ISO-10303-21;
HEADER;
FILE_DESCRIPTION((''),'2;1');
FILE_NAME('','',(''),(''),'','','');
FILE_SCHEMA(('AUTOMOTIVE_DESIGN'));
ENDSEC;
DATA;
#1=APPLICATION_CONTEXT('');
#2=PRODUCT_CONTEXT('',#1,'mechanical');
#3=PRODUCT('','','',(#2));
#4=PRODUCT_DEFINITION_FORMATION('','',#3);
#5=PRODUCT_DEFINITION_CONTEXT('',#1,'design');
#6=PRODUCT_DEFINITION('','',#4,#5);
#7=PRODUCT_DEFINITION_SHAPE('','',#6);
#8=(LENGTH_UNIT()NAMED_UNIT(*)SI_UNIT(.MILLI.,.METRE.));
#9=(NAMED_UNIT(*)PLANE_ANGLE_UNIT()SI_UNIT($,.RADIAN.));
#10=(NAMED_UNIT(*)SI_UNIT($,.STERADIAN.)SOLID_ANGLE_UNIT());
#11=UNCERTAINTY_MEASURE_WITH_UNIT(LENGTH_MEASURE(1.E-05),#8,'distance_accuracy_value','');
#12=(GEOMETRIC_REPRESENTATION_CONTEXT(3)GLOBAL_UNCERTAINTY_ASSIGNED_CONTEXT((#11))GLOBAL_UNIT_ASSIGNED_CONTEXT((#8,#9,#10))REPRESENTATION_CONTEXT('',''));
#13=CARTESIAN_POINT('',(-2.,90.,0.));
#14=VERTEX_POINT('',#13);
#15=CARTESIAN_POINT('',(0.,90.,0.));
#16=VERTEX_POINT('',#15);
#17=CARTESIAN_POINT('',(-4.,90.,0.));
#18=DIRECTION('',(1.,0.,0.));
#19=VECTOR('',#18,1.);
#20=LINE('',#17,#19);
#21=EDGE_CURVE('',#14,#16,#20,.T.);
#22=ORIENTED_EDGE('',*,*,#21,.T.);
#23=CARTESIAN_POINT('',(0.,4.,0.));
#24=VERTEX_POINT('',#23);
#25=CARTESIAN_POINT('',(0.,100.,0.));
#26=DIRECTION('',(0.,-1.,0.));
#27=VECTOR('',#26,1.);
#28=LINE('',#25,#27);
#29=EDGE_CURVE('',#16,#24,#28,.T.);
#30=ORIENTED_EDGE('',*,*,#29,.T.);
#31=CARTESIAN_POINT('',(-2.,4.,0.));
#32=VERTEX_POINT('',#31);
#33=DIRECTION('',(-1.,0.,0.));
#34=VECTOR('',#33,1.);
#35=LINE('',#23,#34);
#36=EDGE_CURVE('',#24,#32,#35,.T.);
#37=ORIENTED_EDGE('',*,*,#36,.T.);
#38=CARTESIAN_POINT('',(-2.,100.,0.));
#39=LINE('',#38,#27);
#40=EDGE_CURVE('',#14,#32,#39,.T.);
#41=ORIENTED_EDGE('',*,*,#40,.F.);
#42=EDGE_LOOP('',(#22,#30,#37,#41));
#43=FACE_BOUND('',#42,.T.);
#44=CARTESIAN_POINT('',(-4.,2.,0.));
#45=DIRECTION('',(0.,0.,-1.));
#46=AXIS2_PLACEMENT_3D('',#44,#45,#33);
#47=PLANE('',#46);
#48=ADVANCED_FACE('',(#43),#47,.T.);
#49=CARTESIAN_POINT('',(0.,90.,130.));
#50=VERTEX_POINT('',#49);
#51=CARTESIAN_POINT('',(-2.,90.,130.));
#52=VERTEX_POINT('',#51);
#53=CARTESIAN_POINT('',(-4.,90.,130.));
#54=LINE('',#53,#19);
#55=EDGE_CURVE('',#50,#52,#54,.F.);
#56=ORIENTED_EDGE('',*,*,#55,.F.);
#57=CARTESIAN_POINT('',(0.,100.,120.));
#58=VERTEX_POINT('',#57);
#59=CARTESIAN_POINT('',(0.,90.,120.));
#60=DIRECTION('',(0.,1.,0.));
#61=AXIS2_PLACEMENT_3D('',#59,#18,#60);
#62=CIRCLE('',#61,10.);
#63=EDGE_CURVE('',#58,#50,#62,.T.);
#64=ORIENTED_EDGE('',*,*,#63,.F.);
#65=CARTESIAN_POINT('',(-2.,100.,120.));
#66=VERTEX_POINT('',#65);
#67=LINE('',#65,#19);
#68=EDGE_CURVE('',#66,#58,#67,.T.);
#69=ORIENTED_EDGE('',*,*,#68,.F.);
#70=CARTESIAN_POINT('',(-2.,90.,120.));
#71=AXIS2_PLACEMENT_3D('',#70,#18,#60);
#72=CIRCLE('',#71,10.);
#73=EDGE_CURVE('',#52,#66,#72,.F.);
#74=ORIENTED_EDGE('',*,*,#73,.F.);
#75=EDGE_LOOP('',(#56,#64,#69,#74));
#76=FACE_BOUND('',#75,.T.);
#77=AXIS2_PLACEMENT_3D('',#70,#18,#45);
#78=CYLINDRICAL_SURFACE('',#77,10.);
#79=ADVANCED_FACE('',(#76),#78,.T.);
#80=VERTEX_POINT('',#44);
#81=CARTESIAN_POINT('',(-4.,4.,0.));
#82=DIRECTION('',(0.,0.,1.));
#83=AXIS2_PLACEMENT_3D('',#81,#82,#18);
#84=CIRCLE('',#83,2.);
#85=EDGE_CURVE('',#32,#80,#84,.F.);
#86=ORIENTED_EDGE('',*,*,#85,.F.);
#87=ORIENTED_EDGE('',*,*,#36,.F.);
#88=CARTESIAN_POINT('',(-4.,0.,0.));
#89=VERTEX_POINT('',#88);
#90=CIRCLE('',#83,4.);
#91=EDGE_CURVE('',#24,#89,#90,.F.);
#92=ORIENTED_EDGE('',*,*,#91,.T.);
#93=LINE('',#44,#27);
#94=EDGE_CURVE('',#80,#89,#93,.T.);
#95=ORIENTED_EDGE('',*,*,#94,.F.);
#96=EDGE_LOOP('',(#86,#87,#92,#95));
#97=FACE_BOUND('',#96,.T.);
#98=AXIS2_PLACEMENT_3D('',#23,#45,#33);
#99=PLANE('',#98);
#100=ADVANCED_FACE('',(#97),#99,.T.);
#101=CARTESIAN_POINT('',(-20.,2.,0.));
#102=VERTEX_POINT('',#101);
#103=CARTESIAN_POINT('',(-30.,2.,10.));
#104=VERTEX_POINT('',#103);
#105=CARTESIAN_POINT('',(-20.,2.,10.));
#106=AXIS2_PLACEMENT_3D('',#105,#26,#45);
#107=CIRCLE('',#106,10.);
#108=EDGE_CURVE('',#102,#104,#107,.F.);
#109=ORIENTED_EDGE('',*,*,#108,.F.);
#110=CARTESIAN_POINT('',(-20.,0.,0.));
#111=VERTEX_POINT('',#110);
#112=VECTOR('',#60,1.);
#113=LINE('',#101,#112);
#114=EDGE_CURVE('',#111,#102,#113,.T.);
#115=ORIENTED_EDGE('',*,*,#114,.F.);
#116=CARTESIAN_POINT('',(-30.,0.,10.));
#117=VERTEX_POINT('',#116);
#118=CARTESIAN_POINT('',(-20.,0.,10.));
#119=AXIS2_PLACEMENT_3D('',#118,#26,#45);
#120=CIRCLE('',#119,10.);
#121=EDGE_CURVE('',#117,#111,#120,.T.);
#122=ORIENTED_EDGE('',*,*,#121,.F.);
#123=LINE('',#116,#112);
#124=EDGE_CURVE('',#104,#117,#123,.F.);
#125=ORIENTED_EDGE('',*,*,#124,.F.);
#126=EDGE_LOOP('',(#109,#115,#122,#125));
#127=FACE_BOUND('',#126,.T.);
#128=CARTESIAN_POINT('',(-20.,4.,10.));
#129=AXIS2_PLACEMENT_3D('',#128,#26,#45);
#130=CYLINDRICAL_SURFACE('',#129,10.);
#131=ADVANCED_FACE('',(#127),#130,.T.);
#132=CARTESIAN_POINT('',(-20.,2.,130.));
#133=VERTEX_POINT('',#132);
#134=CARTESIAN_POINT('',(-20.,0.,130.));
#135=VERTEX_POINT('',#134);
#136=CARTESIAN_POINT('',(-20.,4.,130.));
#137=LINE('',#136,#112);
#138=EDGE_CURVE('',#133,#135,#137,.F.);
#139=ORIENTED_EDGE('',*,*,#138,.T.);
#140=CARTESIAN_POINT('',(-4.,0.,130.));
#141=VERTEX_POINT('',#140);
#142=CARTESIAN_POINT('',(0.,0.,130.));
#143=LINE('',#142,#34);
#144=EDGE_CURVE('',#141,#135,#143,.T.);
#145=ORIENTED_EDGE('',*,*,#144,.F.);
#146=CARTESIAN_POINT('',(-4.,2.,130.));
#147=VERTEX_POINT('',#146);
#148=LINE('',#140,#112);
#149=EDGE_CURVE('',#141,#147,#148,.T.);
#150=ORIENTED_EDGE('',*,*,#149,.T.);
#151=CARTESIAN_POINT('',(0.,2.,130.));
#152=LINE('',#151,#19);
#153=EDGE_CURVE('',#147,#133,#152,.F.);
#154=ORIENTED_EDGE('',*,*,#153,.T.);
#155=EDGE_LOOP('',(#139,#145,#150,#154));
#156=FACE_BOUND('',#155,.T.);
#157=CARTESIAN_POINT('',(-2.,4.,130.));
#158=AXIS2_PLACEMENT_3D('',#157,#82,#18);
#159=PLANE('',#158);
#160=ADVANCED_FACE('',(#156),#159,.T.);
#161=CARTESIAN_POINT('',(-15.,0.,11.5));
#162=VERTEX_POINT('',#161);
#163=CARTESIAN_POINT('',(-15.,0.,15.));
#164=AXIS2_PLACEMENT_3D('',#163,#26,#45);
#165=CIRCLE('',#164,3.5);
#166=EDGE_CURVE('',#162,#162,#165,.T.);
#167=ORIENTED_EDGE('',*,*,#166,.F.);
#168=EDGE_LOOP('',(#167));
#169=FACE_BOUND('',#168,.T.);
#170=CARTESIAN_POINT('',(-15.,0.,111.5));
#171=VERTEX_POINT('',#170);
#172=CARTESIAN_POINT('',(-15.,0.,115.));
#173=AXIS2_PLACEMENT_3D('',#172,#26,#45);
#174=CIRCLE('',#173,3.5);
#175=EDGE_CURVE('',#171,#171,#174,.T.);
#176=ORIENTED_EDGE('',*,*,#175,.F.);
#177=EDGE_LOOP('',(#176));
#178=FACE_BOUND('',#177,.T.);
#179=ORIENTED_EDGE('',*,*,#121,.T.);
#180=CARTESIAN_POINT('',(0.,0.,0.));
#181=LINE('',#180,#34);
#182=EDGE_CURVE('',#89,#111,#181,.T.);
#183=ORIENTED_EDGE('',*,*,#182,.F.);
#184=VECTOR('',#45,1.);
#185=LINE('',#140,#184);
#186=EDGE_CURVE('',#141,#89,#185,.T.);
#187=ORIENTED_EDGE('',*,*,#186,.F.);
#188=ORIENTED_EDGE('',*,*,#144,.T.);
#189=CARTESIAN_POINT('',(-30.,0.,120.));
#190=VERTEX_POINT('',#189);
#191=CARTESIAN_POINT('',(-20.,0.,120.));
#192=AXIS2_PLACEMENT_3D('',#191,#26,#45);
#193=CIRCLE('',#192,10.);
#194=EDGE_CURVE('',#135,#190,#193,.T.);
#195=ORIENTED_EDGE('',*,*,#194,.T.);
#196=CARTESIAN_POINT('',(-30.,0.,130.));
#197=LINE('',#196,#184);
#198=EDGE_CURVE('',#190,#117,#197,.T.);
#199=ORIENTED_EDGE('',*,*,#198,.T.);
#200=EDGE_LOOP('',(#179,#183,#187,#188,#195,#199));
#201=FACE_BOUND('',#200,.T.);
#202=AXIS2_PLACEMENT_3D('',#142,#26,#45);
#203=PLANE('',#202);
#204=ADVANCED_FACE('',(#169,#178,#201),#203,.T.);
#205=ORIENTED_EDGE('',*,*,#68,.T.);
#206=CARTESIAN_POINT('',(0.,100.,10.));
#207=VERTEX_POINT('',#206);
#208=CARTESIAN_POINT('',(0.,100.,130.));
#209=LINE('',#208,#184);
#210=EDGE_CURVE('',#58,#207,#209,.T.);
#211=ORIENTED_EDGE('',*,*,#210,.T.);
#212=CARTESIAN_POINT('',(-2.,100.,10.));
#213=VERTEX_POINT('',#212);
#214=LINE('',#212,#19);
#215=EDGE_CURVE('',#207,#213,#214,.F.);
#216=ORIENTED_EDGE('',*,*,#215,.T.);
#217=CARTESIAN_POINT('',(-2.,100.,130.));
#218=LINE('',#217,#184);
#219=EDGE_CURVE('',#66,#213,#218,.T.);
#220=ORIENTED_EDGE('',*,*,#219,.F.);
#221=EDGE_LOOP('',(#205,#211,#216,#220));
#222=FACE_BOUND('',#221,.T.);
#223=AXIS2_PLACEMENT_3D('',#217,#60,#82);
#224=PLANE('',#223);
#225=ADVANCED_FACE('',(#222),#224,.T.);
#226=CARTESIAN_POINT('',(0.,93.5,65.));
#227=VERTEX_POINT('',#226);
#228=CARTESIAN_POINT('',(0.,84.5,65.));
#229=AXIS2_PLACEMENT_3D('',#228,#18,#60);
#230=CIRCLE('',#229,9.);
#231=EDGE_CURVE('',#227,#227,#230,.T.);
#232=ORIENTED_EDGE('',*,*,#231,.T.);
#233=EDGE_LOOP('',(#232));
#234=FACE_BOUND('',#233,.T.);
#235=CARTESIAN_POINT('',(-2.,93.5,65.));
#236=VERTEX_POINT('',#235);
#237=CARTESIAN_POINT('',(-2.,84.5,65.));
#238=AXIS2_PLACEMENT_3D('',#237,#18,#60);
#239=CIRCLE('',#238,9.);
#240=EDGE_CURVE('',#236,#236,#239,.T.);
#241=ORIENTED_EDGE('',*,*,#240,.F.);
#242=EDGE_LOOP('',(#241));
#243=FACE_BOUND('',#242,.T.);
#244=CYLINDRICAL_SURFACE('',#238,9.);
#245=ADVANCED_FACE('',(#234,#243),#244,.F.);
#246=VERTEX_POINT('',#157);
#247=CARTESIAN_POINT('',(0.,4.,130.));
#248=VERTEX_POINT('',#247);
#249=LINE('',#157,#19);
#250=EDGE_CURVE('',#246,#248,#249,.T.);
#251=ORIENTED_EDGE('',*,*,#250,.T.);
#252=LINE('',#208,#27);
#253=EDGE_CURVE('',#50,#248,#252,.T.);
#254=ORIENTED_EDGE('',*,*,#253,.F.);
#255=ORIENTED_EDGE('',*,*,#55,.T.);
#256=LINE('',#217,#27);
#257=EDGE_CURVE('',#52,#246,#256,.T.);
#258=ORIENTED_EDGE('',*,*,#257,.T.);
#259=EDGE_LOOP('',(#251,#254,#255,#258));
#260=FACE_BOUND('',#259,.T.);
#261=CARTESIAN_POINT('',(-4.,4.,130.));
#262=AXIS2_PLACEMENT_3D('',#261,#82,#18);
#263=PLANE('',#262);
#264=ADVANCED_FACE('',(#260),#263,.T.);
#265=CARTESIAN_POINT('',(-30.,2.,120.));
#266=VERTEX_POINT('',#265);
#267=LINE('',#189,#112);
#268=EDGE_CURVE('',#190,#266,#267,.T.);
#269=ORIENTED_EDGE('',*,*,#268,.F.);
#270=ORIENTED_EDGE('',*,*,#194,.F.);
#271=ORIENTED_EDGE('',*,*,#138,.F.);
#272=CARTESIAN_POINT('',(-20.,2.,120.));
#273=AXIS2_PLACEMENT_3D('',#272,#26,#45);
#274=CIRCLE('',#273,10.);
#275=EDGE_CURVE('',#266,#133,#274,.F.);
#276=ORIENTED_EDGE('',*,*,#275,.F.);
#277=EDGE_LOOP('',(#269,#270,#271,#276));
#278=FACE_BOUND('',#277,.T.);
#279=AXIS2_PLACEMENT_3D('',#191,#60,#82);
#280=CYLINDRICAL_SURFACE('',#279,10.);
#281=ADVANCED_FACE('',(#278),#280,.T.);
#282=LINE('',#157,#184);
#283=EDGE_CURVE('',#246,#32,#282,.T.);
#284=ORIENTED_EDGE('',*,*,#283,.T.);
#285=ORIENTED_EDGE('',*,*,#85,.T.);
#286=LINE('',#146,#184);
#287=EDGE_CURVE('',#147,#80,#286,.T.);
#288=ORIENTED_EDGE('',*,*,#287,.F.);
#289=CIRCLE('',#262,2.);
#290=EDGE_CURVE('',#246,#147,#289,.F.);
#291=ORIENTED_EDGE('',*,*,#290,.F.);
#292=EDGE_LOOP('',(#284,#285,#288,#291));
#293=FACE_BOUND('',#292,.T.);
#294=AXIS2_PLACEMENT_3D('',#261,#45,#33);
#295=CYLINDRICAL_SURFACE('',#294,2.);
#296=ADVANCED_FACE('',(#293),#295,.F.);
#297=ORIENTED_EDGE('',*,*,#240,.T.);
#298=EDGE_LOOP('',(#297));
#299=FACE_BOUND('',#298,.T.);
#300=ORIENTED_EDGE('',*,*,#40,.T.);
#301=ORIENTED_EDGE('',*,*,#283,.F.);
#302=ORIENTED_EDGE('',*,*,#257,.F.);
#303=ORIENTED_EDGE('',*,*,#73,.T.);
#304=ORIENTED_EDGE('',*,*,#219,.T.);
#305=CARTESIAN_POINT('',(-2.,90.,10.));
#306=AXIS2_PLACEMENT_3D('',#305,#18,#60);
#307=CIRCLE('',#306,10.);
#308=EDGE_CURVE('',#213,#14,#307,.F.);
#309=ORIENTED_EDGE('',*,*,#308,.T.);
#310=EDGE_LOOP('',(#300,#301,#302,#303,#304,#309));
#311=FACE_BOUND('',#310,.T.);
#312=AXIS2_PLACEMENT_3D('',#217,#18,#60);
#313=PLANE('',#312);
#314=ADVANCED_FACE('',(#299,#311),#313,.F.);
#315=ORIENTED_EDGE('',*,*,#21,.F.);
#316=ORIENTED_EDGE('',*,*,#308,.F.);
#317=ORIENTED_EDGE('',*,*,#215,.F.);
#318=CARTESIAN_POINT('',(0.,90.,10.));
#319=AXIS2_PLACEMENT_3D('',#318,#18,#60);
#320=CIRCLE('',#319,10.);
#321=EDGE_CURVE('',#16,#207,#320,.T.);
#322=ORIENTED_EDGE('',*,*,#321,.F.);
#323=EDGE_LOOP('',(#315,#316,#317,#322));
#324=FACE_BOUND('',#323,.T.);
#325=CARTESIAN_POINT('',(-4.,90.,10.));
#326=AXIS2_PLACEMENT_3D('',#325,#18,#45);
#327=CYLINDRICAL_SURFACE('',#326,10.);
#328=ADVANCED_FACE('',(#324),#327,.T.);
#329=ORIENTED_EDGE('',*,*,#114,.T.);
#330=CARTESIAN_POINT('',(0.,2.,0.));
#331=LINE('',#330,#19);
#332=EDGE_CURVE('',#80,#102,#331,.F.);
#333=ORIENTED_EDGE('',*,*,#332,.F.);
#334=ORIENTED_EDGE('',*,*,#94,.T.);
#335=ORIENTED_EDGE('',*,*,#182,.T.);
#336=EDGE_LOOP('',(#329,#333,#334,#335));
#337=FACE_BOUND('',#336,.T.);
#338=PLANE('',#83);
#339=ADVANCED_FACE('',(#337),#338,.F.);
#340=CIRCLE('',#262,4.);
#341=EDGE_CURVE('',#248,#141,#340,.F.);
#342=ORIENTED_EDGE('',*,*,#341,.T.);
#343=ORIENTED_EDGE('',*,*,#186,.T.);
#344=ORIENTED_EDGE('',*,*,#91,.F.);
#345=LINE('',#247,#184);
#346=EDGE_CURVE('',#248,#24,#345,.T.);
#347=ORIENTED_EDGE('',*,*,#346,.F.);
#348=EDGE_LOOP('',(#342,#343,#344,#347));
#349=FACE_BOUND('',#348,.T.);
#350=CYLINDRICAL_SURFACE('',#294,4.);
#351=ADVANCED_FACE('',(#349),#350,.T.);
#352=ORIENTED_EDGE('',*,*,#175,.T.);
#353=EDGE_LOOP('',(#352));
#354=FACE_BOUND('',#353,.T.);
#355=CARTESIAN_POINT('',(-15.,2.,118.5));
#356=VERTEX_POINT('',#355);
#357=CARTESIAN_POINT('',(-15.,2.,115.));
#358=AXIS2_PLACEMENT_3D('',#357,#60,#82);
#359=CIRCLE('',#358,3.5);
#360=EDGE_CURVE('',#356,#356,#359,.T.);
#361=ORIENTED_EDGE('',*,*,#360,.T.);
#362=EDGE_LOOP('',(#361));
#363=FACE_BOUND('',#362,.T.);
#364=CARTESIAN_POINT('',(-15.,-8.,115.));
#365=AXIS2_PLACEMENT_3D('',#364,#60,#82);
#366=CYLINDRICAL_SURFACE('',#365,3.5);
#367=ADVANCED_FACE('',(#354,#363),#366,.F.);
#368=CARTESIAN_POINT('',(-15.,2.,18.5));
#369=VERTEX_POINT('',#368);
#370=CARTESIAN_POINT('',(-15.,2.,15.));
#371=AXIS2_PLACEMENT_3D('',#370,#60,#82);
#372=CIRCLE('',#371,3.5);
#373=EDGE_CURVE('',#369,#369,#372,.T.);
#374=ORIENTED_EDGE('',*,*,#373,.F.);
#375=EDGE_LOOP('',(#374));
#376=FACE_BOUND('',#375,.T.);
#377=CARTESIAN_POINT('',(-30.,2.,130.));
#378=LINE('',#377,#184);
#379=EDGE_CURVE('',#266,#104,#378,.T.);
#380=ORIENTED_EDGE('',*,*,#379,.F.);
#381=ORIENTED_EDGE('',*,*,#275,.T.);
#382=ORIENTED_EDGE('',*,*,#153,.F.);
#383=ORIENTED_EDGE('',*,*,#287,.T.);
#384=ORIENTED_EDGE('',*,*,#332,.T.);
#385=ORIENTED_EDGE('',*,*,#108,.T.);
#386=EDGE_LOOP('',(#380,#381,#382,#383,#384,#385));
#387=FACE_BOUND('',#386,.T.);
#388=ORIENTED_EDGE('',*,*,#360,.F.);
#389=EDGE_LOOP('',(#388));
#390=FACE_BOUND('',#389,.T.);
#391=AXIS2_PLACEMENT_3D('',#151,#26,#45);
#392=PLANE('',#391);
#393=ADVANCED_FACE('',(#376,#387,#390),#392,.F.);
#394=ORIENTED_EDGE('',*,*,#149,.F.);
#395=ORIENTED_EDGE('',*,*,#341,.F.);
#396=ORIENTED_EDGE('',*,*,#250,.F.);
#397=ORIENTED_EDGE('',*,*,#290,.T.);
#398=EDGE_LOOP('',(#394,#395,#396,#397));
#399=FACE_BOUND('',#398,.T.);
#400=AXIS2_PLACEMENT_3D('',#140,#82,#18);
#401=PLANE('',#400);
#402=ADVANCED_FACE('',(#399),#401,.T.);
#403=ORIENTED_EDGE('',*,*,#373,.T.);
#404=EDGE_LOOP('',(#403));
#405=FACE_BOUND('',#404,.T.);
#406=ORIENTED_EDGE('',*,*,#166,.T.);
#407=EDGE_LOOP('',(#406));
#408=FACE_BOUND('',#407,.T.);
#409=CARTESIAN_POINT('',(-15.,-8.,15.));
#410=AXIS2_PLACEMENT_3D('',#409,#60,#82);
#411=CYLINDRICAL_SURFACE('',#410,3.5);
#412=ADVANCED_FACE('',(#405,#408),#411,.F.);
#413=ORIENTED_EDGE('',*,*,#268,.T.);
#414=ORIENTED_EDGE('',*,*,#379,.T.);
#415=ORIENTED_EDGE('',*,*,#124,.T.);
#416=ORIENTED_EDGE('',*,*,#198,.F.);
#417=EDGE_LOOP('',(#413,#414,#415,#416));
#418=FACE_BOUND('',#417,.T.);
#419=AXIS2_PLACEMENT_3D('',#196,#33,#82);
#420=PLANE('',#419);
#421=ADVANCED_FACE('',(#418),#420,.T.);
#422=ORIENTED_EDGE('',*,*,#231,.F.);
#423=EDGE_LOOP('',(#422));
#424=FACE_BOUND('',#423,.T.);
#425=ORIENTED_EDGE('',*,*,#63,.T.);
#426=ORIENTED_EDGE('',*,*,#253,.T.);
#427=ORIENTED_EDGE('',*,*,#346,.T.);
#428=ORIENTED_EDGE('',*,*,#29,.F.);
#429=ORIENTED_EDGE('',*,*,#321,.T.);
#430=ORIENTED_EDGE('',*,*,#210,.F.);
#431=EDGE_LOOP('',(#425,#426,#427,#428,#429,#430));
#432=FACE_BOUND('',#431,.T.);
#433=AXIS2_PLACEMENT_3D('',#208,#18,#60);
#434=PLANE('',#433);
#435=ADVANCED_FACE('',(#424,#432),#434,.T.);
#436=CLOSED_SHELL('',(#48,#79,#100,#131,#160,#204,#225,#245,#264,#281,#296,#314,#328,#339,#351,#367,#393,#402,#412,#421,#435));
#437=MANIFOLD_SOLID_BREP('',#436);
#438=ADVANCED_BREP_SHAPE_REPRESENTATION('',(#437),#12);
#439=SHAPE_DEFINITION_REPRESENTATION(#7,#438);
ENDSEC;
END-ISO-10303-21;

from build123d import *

# Parameters (mm, degrees)
BASE_FLANGE1_DEPTH = 130
FILLET1_R          = 10
SKETCH6_R          = 3.5
CUT_EXTRUDE1_DEPTH = 10
SKETCH7_R          = 9
CUT_EXTRUDE2_DEPTH = 2


# Sheet-metal steps are written as plain solids
with BuildPart() as part:
    # Sketch1 → Base-Flange1 (new body)
    with BuildSketch(Plane.XY):
        with BuildLine():
            Line((0, 100), (0, 4))
            ThreePointArc((0, 4), (-1.171572875, 1.171572875), (-4, 0))
            Line((-4, 0), (-30, 0))
            Line((-30, 0), (-30, 2))
            Line((-30, 2), (-4, 2))
            ThreePointArc((-4, 2), (-2.585786438, 2.585786438), (-2, 4))
            Line((-2, 4), (-2, 100))
            Line((-2, 100), (0, 100))
        make_face()
    extrude(amount=BASE_FLANGE1_DEPTH)

    # Fillet1
    fillet1_edges = [part.edges().sort_by_distance(p)[0] for p in [
        (-1, 100, 130),
        (-1, 100, 0),
        (-30, 1, 130),
        (-30, 1, 0),
    ]]
    fillet(fillet1_edges, radius=FILLET1_R)

    # Sketch6 → Cut-Extrude1 (cut)
    with BuildSketch(Plane(origin=(0, 2, 0), x_dir=(1, 0, 0), z_dir=(0, 1, 0))):
        with Locations(Location((-15, -15, 0), (0, 0, 270))):
            Circle(SKETCH6_R)
        with Locations(Location((-15, -115, 0), (0, 0, 270))):
            Circle(SKETCH6_R)
    extrude(amount=-CUT_EXTRUDE1_DEPTH, mode=Mode.SUBTRACT)

    # Sketch7 → Cut-Extrude2 (cut)
    with BuildSketch(Plane(origin=(0, 0, 0), x_dir=(0, 0, -1), z_dir=(1, 0, 0))):
        with Locations(Location((-65, 84.499999997, 0), (0, 0, 90))):
            Circle(SKETCH7_R)
    extrude(amount=-CUT_EXTRUDE2_DEPTH, mode=Mode.SUBTRACT)


solid = part.part
